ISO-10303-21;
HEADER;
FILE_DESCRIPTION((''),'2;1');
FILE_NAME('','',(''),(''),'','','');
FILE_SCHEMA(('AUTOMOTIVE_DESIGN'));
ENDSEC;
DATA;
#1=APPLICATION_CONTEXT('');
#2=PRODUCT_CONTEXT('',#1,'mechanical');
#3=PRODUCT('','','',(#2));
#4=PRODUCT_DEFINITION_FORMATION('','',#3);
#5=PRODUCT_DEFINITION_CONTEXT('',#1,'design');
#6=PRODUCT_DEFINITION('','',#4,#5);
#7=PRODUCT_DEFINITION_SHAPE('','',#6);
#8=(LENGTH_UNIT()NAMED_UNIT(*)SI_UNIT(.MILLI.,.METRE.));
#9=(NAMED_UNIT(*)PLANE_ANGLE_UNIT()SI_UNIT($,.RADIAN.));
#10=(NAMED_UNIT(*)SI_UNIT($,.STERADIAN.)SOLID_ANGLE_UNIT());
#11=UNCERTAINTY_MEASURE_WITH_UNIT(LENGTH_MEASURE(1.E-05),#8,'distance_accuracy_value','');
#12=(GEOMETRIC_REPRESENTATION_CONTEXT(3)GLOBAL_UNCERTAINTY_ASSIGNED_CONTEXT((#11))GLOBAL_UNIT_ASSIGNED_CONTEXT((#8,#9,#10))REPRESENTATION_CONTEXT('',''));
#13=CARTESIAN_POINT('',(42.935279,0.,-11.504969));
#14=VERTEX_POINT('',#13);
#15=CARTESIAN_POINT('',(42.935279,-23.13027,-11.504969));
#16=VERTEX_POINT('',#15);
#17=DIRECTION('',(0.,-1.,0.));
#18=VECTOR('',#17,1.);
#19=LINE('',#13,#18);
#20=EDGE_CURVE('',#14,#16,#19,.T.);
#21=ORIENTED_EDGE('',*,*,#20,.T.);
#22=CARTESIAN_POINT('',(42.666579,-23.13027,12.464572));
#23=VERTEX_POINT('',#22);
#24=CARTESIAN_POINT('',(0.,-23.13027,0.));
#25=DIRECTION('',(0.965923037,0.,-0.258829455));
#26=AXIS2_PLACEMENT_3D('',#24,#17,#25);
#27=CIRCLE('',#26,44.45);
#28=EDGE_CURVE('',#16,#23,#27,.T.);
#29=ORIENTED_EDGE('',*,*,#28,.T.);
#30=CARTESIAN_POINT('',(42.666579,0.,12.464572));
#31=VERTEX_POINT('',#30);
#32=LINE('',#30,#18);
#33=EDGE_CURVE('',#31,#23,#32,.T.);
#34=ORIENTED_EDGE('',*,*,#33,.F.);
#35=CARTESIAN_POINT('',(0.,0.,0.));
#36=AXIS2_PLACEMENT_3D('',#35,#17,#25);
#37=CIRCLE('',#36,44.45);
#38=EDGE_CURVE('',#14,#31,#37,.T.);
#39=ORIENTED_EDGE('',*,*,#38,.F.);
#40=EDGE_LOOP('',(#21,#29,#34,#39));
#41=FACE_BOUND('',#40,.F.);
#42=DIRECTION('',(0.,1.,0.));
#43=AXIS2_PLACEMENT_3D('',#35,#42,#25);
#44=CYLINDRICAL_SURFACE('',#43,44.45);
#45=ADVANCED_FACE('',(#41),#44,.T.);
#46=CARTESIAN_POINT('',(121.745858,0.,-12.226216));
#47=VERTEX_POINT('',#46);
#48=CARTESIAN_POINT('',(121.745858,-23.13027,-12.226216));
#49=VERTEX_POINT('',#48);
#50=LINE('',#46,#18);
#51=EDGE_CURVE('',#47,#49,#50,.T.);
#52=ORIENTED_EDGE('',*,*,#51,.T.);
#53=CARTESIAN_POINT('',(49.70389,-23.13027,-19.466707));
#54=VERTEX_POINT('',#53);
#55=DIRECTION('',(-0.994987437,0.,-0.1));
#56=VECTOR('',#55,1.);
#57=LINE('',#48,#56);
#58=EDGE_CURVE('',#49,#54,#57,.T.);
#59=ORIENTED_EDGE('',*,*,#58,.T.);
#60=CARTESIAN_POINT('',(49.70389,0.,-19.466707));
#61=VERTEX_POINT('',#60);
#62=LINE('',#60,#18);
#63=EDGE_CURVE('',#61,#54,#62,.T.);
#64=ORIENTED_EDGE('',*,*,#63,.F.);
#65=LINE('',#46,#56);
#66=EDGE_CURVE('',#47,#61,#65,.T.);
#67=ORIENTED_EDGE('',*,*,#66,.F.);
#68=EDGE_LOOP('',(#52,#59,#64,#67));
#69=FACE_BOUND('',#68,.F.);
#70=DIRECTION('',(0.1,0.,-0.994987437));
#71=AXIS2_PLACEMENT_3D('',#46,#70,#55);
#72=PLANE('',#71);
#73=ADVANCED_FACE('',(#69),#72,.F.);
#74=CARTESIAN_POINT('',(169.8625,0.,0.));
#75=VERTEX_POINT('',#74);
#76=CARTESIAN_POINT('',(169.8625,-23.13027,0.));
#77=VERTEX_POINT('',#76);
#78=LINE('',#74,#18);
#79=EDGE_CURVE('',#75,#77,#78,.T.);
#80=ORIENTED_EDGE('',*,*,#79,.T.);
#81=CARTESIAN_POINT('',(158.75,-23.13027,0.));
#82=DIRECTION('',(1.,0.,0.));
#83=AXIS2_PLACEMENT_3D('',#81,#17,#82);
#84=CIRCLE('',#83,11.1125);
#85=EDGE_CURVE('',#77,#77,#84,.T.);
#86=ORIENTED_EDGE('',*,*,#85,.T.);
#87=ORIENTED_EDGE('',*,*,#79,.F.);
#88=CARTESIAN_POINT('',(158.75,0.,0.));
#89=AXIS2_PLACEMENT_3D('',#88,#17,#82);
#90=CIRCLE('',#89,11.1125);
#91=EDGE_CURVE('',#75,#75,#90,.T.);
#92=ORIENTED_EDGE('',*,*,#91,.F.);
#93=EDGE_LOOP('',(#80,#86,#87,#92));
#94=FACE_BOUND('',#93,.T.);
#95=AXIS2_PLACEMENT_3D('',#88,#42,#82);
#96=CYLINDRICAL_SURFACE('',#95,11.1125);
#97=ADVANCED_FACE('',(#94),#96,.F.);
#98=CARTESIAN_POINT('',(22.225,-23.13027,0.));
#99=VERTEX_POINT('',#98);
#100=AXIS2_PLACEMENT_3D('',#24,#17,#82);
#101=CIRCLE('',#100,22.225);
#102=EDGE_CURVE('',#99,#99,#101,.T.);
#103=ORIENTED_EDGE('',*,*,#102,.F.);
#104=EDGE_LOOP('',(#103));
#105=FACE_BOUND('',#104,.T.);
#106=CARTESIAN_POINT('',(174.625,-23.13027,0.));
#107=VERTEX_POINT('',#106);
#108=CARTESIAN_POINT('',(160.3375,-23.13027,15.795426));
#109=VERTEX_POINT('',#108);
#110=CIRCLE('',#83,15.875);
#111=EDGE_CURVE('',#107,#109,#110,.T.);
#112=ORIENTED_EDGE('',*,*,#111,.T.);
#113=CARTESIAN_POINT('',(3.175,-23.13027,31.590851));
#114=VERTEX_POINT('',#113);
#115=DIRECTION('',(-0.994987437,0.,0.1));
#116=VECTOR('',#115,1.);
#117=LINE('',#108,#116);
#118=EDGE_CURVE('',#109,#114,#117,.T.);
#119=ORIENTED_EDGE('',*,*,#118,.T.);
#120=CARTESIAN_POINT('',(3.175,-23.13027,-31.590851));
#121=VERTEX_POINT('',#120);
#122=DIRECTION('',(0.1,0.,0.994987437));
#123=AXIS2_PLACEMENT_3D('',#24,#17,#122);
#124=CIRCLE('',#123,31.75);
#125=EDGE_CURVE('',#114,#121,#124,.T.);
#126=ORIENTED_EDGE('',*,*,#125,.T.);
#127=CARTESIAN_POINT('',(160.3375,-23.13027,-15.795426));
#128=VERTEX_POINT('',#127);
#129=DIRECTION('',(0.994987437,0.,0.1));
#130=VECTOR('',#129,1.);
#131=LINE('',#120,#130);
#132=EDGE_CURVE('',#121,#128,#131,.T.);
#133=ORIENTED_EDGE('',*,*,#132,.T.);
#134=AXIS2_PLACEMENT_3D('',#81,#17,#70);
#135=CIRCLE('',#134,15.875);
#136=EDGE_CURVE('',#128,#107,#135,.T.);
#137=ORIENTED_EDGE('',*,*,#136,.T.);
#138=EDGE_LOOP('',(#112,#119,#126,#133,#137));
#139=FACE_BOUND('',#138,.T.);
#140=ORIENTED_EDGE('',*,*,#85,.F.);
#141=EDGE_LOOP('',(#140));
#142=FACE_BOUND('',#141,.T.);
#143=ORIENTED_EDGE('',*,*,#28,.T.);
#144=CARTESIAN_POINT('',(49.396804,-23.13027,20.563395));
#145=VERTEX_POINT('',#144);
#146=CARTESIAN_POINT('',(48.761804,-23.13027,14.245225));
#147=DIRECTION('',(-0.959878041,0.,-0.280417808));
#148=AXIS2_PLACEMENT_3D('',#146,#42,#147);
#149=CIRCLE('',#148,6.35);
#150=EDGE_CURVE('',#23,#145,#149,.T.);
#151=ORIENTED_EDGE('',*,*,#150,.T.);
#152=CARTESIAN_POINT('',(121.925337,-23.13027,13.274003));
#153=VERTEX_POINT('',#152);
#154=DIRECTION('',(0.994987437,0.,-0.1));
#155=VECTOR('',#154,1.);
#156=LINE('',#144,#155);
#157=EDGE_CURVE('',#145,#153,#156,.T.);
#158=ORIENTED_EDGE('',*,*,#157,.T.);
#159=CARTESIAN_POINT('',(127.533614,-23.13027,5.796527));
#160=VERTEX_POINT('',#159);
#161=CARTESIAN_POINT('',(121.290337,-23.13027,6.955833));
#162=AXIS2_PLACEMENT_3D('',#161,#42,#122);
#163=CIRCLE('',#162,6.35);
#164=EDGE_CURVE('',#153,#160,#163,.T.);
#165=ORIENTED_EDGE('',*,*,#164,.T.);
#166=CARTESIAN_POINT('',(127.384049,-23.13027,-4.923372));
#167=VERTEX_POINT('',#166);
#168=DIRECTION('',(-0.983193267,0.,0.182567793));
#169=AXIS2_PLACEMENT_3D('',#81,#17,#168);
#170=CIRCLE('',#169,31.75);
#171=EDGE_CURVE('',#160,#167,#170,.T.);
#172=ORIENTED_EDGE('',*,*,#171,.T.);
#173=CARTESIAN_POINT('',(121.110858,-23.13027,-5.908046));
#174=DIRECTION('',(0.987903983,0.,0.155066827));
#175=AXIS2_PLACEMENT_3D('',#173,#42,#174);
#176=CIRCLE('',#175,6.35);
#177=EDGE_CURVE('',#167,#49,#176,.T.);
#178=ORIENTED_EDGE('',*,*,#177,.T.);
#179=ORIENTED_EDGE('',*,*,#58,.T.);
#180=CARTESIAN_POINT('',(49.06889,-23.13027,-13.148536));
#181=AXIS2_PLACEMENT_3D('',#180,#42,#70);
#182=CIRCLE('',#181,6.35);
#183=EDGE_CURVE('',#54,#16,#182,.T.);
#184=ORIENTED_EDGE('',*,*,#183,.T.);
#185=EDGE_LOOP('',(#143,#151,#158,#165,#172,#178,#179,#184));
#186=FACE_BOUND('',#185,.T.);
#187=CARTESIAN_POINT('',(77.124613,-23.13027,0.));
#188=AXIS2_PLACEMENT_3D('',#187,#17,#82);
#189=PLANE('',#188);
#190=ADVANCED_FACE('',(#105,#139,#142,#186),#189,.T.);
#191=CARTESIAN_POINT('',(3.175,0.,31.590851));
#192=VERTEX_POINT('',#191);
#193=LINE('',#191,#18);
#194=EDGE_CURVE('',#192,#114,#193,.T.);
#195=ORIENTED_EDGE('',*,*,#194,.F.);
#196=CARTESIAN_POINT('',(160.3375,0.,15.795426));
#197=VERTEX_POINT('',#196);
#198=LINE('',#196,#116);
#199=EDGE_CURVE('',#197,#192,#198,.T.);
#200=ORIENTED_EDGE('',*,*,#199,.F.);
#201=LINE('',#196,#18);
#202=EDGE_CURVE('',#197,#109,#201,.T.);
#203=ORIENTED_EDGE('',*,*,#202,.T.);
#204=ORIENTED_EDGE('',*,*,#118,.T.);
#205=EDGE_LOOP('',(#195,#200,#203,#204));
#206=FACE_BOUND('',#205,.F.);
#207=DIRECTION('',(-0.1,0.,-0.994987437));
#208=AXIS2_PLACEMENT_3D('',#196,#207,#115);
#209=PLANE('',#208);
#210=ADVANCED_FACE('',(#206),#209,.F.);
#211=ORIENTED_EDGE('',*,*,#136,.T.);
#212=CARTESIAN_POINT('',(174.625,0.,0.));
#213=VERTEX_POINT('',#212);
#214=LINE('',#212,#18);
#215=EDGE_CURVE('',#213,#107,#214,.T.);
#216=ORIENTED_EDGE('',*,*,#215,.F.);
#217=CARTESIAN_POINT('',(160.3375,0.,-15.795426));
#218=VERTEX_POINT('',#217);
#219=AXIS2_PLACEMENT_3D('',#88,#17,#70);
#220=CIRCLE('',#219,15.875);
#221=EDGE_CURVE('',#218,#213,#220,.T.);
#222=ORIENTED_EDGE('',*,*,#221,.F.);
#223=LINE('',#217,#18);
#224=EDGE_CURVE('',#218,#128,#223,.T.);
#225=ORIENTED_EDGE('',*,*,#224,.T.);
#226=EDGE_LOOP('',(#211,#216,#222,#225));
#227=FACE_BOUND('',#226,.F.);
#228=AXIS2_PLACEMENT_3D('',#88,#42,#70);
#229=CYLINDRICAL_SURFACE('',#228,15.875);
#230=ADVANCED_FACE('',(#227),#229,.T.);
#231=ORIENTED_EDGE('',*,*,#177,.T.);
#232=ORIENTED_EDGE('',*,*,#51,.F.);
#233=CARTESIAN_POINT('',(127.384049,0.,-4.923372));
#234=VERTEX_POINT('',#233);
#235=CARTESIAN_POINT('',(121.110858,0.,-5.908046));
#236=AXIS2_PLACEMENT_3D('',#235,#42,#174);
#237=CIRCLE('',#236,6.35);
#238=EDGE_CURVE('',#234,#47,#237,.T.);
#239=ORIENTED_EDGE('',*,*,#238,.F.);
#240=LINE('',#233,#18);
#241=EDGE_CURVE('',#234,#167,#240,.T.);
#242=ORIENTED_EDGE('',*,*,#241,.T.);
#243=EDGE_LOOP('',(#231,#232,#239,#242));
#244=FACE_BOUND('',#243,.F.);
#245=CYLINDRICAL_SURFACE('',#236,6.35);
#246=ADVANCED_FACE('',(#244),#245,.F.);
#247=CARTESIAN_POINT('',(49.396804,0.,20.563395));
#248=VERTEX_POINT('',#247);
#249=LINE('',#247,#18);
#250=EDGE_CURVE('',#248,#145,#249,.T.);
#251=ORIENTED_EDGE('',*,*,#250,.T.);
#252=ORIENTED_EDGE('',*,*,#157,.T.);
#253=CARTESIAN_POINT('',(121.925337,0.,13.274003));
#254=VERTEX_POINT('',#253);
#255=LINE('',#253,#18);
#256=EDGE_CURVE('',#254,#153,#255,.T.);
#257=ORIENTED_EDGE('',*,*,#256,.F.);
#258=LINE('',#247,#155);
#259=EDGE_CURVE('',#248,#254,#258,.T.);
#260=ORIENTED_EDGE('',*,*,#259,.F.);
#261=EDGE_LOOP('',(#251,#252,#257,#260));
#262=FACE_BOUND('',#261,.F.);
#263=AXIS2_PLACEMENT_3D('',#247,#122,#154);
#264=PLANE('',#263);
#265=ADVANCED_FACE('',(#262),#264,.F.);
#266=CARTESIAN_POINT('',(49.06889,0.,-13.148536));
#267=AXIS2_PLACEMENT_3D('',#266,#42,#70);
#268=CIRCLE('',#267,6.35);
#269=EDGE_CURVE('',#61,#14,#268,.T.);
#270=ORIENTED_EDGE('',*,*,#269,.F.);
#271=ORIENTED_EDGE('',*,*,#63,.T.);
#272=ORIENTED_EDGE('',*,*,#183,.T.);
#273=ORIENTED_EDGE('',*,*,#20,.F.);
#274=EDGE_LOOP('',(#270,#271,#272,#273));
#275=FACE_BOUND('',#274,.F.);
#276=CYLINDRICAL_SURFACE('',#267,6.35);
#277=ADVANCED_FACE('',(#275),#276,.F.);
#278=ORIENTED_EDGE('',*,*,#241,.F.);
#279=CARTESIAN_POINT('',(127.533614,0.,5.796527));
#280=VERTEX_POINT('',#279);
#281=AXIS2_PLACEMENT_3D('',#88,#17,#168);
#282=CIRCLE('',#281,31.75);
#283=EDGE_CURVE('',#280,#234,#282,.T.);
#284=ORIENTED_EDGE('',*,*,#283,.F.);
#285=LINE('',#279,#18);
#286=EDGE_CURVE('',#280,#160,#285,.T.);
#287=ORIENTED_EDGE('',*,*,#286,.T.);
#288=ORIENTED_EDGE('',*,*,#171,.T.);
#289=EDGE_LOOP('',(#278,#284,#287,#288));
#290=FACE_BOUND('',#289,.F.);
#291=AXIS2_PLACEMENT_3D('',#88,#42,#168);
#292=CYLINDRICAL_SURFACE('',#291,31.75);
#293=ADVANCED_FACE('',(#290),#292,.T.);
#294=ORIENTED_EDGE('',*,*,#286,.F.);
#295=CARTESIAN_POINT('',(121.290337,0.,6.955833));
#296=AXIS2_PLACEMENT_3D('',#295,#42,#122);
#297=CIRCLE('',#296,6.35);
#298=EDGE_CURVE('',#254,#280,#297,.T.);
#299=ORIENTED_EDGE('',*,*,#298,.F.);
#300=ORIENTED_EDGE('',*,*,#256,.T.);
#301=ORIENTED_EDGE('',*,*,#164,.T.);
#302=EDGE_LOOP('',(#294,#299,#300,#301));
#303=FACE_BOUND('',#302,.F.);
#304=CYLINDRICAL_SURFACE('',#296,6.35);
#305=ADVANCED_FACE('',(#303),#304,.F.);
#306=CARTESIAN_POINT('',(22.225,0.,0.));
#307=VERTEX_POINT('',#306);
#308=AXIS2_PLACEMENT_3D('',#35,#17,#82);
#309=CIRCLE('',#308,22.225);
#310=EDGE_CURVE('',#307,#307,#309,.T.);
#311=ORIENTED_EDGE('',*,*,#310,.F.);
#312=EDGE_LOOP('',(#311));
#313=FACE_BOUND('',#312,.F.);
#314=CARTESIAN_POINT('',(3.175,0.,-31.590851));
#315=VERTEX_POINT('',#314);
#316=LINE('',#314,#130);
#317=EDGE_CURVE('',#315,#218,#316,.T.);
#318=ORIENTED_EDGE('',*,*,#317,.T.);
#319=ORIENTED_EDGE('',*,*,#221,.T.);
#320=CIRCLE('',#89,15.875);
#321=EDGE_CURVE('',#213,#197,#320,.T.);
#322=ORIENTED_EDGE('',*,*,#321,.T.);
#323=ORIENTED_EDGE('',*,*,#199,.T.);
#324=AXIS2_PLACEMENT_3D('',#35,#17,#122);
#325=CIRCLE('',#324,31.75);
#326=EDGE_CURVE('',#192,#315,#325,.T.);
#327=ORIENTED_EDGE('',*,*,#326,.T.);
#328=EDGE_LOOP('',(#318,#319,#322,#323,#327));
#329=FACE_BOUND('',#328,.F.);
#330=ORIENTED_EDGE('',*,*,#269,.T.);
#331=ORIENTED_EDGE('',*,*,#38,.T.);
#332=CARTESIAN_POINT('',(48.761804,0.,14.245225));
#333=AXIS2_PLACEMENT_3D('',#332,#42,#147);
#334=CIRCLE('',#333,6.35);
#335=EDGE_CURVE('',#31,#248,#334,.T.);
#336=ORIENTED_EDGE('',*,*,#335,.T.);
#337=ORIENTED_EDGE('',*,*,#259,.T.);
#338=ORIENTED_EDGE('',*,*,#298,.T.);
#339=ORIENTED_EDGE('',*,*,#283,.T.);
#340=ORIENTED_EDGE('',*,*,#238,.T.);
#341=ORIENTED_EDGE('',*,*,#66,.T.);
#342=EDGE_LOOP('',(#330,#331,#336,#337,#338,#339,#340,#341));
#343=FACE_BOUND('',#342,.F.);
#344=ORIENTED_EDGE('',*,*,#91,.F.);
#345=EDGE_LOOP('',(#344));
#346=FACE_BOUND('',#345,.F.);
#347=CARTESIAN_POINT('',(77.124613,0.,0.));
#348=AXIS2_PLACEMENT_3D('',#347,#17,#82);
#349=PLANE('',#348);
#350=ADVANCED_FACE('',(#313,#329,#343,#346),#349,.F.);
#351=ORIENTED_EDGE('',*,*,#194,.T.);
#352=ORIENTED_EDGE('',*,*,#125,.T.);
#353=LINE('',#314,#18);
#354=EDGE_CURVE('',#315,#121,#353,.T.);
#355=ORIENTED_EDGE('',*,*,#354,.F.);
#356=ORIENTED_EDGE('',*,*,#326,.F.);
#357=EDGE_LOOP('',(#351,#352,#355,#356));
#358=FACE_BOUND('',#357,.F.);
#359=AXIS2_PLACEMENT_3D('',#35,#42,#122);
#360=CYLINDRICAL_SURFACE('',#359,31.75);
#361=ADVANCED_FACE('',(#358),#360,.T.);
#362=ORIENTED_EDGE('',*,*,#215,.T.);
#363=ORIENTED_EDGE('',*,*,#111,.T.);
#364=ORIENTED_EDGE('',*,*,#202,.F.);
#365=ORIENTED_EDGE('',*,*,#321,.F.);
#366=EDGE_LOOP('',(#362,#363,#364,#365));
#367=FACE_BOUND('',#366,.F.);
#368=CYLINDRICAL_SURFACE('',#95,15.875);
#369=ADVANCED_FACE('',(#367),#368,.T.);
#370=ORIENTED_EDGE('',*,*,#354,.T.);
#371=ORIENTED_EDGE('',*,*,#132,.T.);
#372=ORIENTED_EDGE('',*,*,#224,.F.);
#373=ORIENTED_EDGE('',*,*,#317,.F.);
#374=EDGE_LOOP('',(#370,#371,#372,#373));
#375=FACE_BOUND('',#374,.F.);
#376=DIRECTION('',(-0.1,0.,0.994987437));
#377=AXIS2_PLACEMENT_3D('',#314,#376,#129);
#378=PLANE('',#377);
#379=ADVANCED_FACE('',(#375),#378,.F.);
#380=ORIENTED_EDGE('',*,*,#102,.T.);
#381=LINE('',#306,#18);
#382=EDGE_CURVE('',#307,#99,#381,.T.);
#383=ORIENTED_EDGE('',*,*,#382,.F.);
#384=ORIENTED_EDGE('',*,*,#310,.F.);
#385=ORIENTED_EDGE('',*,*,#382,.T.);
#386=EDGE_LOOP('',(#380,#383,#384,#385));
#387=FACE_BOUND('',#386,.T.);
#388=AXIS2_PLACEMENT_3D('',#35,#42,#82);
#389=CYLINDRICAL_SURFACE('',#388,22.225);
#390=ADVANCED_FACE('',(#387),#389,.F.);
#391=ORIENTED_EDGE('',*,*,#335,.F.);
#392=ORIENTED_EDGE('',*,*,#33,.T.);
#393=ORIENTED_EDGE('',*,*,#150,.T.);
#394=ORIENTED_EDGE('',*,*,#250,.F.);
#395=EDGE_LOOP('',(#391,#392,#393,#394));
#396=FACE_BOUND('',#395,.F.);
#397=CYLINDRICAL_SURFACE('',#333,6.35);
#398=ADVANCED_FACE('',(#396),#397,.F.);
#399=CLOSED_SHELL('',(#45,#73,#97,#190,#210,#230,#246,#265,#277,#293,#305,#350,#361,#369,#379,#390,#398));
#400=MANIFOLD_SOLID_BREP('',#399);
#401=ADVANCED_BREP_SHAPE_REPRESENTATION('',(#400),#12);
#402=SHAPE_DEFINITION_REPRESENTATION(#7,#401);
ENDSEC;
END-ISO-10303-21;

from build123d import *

# Parameters (mm, degrees)
F0_R     = 22.225
F0_R_2   = 11.1125
F1_DEPTH = 23.1302697212


# Not quite as in the source:
# - a feature of the source that left no trace in its solid (it failed there, or was rolled back) is left out


with BuildPart() as f1:
    # F0 (on Front) → F1 (new body)
    with BuildSketch(Plane.XZ):
        with BuildLine():
            ThreePointArc((3.175, 31.5908511281), (23.5464301965, 21.2985474857), (31.75, 0))
            ThreePointArc((31.75, 0), (23.5464301965, -21.2985474857), (3.175, -31.5908511281))
            Line((3.175, -31.5908511281), (160.3375, -15.7954255641))
            ThreePointArc((160.3375, -15.7954255641), (142.875, 0), (160.3375, 15.7954255641))
            Line((160.3375, 15.7954255641), (3.175, 31.5908511281))
        make_face()
        with BuildLine():
            ThreePointArc((42.9352789855, -11.5049692931), (44.4472073469, 0.4982560178), (42.6665789099, 12.4645715579))
            ThreePointArc((42.6665789099, 12.4645715579), (43.8780302599, 18.3037033525), (49.3968044685, 20.5633948632))
            Line((49.3968044685, 20.5633948632), (121.9253365113, 13.2740031244))
            ThreePointArc((121.9253365113, 13.2740031244), (126.3702809224, 10.7659070162), (127.5336137594, 5.7965274156))
            ThreePointArc((127.5336137594, 5.7965274156), (127.0030897981, 0.4429363765), (127.3840485491, -4.9233717695))
            ThreePointArc((127.3840485491, -4.9233717695), (126.1371549085, -9.7886185026), (121.7458582589, -12.226216349))
            Line((121.7458582589, -12.226216349), (49.7038902692, -19.4667065606))
            ThreePointArc((49.7038902692, -19.4667065606), (44.2309158386, -17.261504048), (42.9352789855, -11.5049692931))
        make_face(mode=Mode.SUBTRACT)
        with BuildLine():
            ThreePointArc((3.175, -31.5908511281), (23.5464301965, -21.2985474857), (31.75, 0))
            ThreePointArc((31.75, 0), (23.5464301965, 21.2985474857), (3.175, 31.5908511281))
            ThreePointArc((3.175, 31.5908511281), (-31.75, 0), (3.175, -31.5908511281))
        make_face()
        Circle(F0_R, mode=Mode.SUBTRACT)
        with BuildLine():
            ThreePointArc((174.625, 0), (170.5232150983, 10.6492737428), (160.3375, 15.7954255641))
            ThreePointArc((160.3375, 15.7954255641), (142.875, 0), (160.3375, -15.7954255641))
            ThreePointArc((160.3375, -15.7954255641), (170.5232150983, -10.6492737428), (174.625, 0))
        make_face()
        with Locations((158.75, 0)):
            Circle(F0_R_2, mode=Mode.SUBTRACT)
    extrude(amount=F1_DEPTH)


solid = f1.part
